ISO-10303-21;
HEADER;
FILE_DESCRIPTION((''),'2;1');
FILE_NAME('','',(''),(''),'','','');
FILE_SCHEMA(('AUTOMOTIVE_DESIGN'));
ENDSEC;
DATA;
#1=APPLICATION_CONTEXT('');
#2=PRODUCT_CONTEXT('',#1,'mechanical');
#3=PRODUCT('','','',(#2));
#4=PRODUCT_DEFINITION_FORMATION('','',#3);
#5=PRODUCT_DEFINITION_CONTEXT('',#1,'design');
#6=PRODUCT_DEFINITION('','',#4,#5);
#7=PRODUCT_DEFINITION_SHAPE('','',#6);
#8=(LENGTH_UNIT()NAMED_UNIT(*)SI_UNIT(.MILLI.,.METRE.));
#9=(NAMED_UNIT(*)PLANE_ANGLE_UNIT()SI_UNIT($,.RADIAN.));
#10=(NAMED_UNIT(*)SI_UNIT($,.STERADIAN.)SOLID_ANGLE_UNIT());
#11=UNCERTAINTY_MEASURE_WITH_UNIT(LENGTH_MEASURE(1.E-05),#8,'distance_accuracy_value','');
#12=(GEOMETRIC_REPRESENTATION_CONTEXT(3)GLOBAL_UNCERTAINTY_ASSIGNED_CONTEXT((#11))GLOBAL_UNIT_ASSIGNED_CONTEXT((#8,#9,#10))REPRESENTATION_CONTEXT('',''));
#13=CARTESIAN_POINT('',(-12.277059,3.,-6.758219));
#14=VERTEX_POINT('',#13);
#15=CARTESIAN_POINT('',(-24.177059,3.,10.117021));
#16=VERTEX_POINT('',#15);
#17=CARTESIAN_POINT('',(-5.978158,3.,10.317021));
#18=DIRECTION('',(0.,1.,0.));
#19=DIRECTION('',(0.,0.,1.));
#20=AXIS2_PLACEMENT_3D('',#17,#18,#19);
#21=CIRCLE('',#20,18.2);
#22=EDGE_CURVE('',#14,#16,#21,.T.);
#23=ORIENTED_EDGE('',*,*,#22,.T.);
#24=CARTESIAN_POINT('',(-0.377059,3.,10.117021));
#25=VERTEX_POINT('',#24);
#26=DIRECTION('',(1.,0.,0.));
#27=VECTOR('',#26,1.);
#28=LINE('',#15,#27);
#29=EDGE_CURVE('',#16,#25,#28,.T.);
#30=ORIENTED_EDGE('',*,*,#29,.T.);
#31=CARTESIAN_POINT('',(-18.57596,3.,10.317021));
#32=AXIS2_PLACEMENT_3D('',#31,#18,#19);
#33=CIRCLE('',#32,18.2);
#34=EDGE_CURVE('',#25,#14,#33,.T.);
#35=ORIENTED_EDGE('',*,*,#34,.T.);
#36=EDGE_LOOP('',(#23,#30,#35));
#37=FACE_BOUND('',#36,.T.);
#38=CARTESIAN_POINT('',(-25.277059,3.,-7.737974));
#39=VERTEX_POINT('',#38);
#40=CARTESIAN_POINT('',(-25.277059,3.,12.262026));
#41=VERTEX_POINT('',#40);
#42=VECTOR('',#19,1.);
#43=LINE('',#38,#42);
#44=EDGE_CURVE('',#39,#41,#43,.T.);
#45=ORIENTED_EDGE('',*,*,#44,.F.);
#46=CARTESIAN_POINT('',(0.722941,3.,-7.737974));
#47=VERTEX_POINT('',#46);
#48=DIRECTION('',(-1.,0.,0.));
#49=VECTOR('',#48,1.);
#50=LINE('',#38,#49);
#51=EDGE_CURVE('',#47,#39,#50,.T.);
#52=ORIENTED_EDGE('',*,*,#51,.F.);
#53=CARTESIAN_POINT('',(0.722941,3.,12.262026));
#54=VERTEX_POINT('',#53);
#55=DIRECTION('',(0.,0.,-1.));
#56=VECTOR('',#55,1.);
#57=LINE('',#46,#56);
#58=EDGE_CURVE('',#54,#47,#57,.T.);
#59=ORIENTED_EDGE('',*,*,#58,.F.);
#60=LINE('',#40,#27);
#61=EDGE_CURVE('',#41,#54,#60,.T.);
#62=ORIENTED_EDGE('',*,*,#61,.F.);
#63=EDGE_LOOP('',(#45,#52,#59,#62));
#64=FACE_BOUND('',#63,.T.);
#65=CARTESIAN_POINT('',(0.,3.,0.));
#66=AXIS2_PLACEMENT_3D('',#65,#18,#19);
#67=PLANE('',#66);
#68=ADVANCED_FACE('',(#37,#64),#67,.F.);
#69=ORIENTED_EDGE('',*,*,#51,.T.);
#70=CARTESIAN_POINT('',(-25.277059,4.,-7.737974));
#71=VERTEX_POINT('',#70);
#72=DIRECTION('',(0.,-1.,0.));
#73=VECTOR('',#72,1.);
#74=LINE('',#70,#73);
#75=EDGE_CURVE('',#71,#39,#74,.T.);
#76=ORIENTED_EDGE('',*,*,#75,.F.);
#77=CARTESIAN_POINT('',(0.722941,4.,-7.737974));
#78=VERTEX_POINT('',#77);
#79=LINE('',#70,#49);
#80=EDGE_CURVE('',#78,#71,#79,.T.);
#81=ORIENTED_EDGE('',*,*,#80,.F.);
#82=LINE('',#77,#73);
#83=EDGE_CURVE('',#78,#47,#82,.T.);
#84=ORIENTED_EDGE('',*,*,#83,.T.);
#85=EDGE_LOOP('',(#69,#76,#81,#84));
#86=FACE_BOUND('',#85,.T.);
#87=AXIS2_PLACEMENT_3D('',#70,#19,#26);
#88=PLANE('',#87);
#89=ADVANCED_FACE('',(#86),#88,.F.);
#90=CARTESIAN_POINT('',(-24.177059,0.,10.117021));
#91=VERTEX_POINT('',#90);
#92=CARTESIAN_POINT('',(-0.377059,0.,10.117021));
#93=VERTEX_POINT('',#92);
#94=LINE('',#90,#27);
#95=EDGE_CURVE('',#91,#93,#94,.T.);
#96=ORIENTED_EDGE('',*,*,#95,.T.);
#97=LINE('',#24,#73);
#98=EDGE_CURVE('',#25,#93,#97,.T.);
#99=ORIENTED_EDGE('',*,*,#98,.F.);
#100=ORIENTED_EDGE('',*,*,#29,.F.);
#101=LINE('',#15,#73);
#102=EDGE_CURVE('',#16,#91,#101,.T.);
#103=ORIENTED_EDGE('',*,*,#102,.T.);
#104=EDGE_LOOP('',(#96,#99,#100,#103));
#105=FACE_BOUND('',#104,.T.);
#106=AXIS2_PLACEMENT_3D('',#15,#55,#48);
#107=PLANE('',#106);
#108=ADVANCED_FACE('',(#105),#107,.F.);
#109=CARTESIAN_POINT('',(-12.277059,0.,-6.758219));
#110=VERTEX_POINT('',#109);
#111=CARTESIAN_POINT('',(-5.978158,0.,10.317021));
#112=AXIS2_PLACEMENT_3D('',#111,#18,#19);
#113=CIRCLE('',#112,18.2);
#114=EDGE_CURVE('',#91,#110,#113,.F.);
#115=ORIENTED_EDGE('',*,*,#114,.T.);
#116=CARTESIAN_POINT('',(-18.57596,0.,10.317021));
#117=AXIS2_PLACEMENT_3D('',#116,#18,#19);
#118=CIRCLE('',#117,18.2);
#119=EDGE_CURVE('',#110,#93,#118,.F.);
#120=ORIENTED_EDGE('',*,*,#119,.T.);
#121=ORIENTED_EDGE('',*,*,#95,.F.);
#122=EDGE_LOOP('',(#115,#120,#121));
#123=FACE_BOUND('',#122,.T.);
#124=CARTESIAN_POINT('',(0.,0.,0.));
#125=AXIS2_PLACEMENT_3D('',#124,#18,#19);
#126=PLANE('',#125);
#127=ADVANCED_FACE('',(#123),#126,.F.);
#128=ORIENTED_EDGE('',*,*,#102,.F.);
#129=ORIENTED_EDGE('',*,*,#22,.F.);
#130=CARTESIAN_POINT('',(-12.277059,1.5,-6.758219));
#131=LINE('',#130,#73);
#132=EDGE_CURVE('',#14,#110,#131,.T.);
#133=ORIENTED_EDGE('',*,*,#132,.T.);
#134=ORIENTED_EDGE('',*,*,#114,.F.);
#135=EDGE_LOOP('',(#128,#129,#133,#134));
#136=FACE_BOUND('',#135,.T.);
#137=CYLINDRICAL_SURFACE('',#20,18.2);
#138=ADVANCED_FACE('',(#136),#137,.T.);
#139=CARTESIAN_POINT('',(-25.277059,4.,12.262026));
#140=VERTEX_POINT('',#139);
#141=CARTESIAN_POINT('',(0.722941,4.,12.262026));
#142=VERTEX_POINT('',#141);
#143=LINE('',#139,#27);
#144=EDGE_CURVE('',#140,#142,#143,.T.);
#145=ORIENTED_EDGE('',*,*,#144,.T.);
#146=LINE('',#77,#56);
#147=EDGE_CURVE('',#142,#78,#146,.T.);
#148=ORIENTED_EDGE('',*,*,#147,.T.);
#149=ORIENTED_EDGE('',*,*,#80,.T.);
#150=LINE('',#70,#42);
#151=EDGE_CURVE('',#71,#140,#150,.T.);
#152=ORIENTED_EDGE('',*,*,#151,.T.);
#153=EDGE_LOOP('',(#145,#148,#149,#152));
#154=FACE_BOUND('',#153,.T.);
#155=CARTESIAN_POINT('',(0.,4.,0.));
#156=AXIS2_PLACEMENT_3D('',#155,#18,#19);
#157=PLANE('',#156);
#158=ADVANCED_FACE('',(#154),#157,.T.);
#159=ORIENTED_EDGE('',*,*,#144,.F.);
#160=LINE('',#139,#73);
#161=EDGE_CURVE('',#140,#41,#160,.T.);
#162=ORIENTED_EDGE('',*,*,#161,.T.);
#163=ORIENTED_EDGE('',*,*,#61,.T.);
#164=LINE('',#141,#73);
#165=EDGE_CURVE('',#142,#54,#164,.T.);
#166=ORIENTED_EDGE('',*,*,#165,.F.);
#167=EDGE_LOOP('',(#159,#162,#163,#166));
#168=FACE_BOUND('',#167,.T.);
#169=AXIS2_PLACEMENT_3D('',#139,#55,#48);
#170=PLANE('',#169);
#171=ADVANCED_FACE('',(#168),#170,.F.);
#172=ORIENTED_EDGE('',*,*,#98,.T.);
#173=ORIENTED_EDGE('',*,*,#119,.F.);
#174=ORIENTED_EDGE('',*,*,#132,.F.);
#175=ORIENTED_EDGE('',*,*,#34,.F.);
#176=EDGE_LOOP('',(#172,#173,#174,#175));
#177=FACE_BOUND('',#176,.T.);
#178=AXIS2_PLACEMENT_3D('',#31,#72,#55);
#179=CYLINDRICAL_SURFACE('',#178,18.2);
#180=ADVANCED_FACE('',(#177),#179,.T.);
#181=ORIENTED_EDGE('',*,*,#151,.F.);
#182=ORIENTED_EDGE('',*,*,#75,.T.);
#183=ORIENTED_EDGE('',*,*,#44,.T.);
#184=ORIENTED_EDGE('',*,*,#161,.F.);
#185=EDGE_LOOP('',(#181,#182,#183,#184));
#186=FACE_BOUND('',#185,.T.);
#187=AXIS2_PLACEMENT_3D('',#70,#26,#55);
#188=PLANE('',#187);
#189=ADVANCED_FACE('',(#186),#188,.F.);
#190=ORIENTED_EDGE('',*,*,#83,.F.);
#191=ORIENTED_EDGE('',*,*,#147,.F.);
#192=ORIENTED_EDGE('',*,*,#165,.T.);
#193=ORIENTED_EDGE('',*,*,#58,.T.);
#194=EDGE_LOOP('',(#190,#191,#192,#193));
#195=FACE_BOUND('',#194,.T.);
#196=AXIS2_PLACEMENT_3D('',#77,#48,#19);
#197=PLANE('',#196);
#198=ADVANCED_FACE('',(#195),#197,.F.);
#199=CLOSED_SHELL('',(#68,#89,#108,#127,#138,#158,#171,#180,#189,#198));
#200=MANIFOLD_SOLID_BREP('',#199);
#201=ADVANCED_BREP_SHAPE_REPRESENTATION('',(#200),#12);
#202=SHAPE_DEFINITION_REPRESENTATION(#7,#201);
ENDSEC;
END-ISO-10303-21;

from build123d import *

# Parameters (mm, degrees)
SKETCH1_W           = 23.8
SKETCH1_H           = 18
BOSS_EXTRUDE1_DEPTH = 3
FILLET1_R           = 18.2
SKETCH2_W           = 26
SKETCH2_H           = 20
BOSS_EXTRUDE2_DEPTH = 1


with BuildPart() as part:
    # Sketch1 → Boss-Extrude1 (new body)
    with BuildSketch(Plane(origin=(0, 0, 0), x_dir=(1, 0, 0), z_dir=(0, 1, 0))):
        with Locations((-12.277059049, -1.117021277)):
            Rectangle(SKETCH1_W, SKETCH1_H)
    extrude(amount=BOSS_EXTRUDE1_DEPTH)

    # Fillet1
    # the kernel refuses this fillet: 18.2 mm, written as the material it takes off along each edge
    with BuildSketch(Plane(origin=(-24.177059049, -45.497252664, -7.882978723), x_dir=(1, 0, 0), z_dir=(0, 1, 0))) as fillet1_piece_1:
        with BuildLine():
            CenterArc((18.198901066, -18.2), FILLET1_R, 90, 89.370363377)
            Line((0, -18), (-0.363978021, -17.996))
            ThreePointArc((-0.363978021, -17.996), (-0.364, -9), (-0.364, 0))
            Line((-0.364, 0), (0, 0.364))
            Line((0, 0.364), (18.198901066, 0.364))
            Line((18.198901066, 0.364), (18.198901066, 0))
        make_face()
    extrude(amount=93.994505329, mode=Mode.SUBTRACT)
    with BuildSketch(Plane(origin=(-0.377059049, -45.497252664, -7.882978723), x_dir=(-1, 0, 0), z_dir=(0, 1, 0))) as fillet1_piece_2:
        with BuildLine():
            CenterArc((18.198901066, 18.2), FILLET1_R, 180.629636623, 89.370363377)
            Line((0, 18), (-0.363978021, 17.996))
            ThreePointArc((-0.363978021, 17.996), (-0.364, 9), (-0.364, 0))
            Line((-0.364, 0), (0, -0.364))
            Line((0, -0.364), (18.198901066, -0.364))
            Line((18.198901066, -0.364), (18.198901066, 0))
        make_face()
    extrude(amount=93.994505329, mode=Mode.SUBTRACT)

    # Sketch2 → Boss-Extrude2 (add)
    with BuildSketch(Plane(origin=(0, 3, 0), x_dir=(1, 0, 0), z_dir=(0, 1, 0))):
        with Locations((-12.277059049, -2.262026244)):
            Rectangle(SKETCH2_W, SKETCH2_H)
    extrude(amount=BOSS_EXTRUDE2_DEPTH)


solid = part.part
